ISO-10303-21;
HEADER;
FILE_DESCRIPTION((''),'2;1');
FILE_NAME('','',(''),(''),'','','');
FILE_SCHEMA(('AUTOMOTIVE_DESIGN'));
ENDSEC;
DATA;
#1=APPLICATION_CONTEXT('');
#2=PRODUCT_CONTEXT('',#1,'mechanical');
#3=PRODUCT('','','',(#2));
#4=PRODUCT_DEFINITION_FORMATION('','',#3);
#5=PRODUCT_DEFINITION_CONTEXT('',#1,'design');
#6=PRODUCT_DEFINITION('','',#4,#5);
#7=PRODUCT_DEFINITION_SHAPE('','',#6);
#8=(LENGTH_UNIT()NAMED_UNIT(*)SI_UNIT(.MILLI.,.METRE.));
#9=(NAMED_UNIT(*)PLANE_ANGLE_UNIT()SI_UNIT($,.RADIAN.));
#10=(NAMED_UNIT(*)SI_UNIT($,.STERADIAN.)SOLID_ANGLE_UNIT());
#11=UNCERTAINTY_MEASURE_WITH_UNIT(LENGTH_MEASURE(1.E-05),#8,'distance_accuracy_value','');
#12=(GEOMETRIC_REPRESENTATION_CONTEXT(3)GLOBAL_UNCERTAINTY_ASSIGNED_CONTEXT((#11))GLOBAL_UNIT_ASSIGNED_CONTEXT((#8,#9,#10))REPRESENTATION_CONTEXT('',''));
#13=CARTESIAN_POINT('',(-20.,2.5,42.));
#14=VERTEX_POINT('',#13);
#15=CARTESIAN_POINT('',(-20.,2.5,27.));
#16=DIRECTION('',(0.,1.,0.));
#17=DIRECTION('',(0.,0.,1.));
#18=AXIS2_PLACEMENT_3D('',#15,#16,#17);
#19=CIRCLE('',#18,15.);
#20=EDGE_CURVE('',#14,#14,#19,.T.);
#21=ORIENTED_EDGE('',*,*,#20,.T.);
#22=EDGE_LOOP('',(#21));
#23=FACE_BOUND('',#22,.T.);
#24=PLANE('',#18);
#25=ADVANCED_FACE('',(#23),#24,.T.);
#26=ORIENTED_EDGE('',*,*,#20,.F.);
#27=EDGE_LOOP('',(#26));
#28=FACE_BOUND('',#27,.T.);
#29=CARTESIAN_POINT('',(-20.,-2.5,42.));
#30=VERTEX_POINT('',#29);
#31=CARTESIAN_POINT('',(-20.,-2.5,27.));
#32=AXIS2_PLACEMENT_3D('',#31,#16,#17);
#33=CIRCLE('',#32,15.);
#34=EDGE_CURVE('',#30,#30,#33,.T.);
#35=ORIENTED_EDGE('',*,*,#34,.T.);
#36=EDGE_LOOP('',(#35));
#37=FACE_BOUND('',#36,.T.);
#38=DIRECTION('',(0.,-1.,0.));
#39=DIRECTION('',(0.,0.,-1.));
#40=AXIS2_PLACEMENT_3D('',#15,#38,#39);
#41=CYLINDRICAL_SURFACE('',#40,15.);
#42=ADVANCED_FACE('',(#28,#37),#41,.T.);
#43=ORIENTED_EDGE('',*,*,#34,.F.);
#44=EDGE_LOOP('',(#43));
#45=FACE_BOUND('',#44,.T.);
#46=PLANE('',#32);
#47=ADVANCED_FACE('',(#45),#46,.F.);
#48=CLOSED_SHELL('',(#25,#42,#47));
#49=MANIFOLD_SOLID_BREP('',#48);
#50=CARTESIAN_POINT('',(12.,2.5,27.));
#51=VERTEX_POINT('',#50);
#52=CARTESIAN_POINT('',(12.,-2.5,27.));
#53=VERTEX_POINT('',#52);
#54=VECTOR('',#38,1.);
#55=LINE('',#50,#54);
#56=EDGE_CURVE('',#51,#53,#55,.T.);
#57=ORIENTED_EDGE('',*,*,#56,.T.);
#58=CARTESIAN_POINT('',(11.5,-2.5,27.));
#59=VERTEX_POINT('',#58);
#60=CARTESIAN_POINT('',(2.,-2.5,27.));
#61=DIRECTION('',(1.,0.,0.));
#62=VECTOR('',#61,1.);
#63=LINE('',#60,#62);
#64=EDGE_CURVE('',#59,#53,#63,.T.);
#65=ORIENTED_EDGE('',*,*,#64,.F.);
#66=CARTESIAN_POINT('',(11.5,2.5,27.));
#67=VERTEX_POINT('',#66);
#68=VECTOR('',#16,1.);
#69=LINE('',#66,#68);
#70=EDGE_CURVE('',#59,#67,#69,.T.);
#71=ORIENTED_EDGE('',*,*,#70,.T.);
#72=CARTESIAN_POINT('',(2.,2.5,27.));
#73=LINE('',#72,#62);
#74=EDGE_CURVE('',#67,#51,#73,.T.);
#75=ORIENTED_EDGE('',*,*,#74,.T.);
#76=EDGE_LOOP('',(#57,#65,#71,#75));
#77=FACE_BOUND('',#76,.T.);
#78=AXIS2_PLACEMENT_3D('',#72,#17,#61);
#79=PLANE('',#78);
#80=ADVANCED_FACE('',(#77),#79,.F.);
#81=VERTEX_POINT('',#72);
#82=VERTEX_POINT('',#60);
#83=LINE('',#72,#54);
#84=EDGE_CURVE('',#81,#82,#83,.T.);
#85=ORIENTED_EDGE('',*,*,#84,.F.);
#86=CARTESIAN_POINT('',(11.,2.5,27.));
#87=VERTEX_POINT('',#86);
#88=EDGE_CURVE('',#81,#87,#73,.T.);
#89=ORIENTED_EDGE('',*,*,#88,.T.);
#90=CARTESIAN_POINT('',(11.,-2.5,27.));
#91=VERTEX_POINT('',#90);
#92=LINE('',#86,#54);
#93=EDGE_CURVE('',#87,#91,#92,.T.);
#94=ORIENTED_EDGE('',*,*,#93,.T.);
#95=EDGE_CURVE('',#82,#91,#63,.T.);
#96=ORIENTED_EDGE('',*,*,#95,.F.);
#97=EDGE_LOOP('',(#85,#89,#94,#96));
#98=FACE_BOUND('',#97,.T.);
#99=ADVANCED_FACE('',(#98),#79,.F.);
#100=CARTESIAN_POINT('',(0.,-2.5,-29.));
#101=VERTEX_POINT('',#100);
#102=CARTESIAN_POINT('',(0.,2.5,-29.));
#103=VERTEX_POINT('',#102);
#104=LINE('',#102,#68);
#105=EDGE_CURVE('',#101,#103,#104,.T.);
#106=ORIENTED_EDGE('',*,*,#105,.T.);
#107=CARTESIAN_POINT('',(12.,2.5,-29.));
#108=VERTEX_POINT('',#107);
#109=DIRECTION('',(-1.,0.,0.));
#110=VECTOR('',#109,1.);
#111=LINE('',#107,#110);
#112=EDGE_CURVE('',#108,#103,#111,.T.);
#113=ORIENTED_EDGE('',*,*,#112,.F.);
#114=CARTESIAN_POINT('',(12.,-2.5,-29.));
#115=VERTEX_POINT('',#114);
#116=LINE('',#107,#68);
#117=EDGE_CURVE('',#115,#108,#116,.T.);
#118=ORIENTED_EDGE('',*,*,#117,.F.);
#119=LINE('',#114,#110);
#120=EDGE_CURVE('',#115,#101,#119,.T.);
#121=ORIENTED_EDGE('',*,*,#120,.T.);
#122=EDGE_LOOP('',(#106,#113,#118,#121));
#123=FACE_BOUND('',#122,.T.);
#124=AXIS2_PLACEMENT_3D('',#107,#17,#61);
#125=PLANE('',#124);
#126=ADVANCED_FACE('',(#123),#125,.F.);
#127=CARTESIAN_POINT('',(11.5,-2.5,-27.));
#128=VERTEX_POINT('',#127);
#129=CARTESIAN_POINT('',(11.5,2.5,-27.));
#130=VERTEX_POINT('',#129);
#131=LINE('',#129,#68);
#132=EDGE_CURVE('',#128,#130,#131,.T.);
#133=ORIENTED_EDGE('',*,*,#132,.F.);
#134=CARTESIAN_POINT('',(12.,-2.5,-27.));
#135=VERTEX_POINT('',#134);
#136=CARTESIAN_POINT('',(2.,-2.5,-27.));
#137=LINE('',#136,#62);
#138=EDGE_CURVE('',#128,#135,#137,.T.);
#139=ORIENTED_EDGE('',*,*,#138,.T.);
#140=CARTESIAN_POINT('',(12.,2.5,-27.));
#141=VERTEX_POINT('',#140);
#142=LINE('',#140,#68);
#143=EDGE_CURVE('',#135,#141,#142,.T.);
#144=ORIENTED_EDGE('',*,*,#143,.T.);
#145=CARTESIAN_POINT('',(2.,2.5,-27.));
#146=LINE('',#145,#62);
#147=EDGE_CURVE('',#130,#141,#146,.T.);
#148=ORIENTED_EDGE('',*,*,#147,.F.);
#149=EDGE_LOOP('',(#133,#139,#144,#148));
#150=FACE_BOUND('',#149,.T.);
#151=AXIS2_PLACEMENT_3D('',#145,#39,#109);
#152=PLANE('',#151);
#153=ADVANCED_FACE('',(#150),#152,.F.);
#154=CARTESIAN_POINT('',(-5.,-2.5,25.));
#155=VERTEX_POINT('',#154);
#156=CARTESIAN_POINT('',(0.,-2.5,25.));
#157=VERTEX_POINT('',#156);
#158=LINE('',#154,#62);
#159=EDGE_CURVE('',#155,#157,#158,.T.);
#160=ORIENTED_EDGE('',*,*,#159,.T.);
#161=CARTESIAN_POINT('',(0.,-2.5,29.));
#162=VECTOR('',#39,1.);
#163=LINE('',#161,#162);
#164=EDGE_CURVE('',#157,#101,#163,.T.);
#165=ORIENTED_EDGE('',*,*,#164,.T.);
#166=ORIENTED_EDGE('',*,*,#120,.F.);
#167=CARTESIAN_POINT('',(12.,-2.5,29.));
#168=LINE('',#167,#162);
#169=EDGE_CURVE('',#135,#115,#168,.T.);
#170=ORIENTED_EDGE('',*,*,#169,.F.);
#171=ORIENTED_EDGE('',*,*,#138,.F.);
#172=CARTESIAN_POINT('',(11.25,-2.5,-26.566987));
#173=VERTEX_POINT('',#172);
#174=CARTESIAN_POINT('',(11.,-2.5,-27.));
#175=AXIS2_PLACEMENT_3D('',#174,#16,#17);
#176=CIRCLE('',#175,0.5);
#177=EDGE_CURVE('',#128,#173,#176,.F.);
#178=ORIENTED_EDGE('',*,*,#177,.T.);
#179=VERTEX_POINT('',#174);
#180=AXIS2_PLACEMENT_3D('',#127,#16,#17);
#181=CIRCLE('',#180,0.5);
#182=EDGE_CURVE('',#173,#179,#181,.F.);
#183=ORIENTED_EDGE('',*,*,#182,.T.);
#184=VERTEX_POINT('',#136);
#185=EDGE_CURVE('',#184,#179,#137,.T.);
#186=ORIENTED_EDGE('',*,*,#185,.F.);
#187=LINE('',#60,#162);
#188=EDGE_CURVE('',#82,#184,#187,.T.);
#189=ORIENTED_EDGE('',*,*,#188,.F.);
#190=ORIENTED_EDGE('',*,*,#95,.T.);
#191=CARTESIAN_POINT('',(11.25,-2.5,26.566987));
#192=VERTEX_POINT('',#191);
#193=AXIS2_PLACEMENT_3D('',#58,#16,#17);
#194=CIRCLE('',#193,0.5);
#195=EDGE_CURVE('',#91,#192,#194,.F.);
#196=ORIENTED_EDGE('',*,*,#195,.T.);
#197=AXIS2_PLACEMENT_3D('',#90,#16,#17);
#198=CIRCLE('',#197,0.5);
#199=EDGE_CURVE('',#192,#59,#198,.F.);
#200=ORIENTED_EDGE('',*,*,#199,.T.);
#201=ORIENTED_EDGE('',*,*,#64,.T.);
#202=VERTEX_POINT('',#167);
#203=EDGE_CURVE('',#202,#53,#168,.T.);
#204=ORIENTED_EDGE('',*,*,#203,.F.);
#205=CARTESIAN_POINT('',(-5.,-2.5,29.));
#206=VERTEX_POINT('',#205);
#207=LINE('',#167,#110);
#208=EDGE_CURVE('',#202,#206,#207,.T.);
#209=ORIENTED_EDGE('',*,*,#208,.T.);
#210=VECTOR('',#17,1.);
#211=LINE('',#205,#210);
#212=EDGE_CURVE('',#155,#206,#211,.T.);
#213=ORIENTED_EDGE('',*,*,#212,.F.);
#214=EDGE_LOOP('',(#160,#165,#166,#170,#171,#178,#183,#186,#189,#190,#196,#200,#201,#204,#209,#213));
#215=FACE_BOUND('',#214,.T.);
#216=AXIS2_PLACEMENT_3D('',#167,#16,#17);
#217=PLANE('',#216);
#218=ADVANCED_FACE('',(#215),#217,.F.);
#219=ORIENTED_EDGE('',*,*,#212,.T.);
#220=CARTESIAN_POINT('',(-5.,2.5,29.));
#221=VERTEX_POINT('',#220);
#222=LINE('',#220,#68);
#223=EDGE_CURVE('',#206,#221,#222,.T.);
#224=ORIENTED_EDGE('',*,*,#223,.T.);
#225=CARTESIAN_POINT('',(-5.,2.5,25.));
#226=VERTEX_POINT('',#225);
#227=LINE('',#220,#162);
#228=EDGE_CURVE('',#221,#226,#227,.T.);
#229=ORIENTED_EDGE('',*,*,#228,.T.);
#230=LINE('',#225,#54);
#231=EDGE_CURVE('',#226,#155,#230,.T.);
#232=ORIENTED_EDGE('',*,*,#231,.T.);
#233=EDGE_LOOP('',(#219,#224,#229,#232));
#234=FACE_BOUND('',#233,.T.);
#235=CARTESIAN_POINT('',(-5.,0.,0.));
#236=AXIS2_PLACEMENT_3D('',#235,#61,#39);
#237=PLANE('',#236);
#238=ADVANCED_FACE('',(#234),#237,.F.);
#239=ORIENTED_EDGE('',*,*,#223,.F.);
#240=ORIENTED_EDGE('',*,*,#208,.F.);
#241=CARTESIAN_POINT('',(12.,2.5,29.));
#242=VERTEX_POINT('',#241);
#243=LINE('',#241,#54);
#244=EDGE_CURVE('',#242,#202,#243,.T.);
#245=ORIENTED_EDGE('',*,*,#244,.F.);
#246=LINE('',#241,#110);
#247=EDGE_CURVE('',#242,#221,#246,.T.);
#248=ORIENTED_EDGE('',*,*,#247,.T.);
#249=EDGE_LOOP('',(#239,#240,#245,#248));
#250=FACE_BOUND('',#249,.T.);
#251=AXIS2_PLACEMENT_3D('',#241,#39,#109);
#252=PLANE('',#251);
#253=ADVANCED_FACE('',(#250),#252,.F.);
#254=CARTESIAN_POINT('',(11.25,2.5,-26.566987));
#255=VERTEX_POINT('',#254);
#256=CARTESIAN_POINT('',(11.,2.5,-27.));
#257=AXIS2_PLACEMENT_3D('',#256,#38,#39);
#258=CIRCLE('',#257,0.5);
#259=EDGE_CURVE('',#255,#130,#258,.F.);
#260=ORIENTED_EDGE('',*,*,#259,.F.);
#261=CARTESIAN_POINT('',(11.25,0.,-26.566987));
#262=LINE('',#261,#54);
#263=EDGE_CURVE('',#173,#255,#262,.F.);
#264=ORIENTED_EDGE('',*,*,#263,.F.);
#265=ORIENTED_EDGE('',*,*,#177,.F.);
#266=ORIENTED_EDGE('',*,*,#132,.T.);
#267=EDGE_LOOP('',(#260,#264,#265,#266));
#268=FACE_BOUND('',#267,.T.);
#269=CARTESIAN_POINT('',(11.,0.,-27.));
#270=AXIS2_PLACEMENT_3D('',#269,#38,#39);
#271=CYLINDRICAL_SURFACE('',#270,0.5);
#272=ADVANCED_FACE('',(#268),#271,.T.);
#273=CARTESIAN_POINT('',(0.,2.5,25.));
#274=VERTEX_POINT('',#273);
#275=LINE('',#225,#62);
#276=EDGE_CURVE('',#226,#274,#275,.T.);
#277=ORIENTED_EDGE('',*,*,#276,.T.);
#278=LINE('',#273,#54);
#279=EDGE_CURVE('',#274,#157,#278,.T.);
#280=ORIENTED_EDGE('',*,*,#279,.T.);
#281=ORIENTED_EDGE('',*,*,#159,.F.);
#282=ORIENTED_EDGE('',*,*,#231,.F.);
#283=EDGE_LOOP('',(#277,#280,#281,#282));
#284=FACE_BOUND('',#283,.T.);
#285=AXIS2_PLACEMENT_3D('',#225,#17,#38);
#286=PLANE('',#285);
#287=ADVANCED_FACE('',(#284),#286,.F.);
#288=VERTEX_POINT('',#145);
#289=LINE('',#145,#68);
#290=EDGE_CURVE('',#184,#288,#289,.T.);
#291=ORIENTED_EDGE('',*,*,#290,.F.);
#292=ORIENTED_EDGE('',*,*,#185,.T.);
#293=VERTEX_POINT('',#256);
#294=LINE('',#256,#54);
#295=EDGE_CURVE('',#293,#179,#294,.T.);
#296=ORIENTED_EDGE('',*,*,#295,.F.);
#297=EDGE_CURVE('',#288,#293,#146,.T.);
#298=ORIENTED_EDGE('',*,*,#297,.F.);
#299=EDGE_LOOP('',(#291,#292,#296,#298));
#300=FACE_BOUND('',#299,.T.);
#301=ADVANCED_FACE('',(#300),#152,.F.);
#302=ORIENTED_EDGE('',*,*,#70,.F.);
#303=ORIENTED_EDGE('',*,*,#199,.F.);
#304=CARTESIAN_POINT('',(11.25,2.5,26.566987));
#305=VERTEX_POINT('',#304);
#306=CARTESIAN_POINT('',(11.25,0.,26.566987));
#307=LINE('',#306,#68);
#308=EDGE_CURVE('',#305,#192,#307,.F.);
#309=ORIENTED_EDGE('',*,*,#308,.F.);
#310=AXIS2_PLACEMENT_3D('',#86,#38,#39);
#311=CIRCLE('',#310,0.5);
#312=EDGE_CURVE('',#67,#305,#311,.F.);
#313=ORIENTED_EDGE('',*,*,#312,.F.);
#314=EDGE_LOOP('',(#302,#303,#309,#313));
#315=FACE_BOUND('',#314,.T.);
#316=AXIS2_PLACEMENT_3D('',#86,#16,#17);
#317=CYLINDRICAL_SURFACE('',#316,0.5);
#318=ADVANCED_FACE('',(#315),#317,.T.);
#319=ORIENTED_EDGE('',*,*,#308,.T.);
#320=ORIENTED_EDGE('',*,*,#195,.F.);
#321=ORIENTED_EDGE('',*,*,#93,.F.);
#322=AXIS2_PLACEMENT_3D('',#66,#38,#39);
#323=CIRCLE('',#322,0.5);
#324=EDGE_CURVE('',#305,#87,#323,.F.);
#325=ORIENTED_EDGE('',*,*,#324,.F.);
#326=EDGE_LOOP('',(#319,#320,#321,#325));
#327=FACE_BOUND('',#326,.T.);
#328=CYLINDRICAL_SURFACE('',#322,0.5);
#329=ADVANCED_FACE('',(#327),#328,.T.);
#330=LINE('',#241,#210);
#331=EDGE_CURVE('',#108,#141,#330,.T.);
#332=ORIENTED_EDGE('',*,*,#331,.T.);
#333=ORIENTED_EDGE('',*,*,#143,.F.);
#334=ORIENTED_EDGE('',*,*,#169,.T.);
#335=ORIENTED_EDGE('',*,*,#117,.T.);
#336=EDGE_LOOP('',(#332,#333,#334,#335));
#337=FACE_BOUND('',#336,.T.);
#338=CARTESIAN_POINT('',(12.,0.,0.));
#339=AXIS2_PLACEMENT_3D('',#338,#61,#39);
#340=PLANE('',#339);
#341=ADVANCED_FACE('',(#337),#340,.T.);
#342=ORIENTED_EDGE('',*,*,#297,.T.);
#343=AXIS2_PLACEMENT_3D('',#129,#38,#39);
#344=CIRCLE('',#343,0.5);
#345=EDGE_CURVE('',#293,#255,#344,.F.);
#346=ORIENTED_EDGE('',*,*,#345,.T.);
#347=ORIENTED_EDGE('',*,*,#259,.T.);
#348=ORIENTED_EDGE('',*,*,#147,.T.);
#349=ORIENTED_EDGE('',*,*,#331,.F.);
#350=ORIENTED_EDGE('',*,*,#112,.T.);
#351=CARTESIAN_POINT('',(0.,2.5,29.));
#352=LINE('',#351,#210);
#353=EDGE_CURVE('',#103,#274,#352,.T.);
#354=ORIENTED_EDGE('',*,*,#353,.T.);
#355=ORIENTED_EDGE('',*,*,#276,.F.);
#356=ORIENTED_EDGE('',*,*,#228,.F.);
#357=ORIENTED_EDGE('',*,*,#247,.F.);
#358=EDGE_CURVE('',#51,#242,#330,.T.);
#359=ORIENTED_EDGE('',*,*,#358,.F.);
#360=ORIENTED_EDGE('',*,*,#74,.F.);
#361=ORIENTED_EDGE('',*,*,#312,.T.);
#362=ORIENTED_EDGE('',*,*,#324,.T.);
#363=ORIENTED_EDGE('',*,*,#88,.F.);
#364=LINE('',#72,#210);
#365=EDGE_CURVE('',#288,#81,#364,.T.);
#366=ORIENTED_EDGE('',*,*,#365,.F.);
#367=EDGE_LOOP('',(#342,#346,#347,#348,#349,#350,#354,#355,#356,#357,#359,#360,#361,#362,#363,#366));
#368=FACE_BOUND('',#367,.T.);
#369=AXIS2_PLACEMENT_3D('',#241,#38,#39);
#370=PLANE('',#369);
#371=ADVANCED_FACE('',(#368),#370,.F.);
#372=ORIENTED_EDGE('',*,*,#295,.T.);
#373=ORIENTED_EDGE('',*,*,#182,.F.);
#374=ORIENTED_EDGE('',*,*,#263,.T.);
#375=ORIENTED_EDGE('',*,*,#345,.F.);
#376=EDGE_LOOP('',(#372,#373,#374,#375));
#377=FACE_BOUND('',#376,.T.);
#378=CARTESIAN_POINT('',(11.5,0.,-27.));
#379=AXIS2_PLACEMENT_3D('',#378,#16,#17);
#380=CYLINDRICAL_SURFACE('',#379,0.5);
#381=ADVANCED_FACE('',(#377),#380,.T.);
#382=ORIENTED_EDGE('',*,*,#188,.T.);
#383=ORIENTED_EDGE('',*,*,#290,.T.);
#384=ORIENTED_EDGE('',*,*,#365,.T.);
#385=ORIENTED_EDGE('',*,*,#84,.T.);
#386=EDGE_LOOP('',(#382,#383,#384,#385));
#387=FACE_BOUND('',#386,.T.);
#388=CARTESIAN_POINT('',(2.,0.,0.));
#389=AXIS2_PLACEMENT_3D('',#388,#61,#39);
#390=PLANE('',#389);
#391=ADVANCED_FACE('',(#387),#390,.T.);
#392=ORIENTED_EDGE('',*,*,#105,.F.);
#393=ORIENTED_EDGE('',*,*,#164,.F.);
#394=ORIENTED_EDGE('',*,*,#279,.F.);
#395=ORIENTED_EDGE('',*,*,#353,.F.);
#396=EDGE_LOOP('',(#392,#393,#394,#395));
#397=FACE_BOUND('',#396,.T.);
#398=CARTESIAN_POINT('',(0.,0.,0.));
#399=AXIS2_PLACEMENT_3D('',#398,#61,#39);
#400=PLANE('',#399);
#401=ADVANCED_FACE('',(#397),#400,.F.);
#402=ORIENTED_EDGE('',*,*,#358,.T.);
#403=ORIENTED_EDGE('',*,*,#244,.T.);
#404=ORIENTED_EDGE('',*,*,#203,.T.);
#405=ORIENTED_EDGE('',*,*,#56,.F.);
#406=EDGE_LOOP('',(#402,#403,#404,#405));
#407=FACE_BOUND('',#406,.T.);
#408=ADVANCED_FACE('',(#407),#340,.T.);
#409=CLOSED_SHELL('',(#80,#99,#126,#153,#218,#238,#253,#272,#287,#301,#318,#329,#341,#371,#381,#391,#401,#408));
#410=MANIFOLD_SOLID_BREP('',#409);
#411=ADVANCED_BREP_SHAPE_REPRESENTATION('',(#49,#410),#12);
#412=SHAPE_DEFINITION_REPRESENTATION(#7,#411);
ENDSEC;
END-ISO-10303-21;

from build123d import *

# Parameters (mm, degrees)
SKETCH6_W                = 58
SKETCH6_H                = 5
BOSS_EXTRUDE2_DEPTH      = 12
SKETCH7_W                = 54
SKETCH7_H                = 5
CUT_EXTRUDE3_DEPTH       = 10
SKETCH8_W                = 0.5
SKETCH8_H                = 5
BOSS_EXTRUDE3_DEPTH      = 0.5
FILLET1_R                = 0.5
FILLET1_OF_MIRROR3_R     = 0.5
SKETCH9_W                = 4
SKETCH9_H                = 5
BOSS_EXTRUDE4_DEPTH      = 5
BOSS_EXTRUDE5_DEPTH      = 2.5
BOSS_EXTRUDE5_DEPTH_BACK = 2.5
SKETCH11_R               = 15


with BuildPart() as part:
    # Sketch6 → Boss-Extrude2 (new body)
    with BuildSketch(Plane(origin=(0, 0, 0), x_dir=(0, 0, -1), z_dir=(1, 0, 0))):
        Rectangle(SKETCH6_W, SKETCH6_H)
    extrude(amount=BOSS_EXTRUDE2_DEPTH)

    # Sketch7 → Cut-Extrude3 (cut)
    with BuildSketch(Plane(origin=(12, 0, 0), x_dir=(0, 0, -1), z_dir=(1, 0, 0))):
        Rectangle(SKETCH7_W, SKETCH7_H)
    extrude(amount=-CUT_EXTRUDE3_DEPTH, mode=Mode.SUBTRACT)

    # Sketch8 → Boss-Extrude3 (add)
    with BuildSketch(Plane.XY.offset(-27)):
        with Locations((11.25, 0)):
            Rectangle(SKETCH8_W, SKETCH8_H)
    boss_extrude3 = extrude(amount=BOSS_EXTRUDE3_DEPTH)

    # Fillet1
    # the kernel refuses this fillet: 0.5 mm, written as the material it takes off along each edge
    with BuildSketch(Plane(origin=(11, -3.75, -26.5), x_dir=(0, 0, -1), z_dir=(0, 1, 0)), Plane(origin=(11.5, 3.75, -26.5), x_dir=(0, 0, -1), z_dir=(0, -1, 0))) as fillet1_piece_1:
        with BuildLine():
            CenterArc((FILLET1_R, -FILLET1_R), FILLET1_R, 90, 90)
            Line((0, -FILLET1_R), (0, 0))
            Line((0, 0), (FILLET1_R, 0))
        make_face()
    extrude(amount=7.5, mode=Mode.SUBTRACT)

    # Mirror3: Boss-Extrude3 across plane
    add(boss_extrude3.mirror(Plane(origin=(0, 0, 0), x_dir=(1, 0, 0), z_dir=(0, 0, -1))))

    # Fillet1 of Mirror3
    # the kernel refuses this fillet: 0.5 mm, written as the material it takes off along each edge
    with BuildSketch(Plane(origin=(11, -3.75, 26.5), x_dir=(0, 0, 1), z_dir=(0, 1, 0)), Plane(origin=(11.5, 3.75, 26.5), x_dir=(0, 0, 1), z_dir=(0, -1, 0))) as fillet1_of_mirror3_piece_1:
        with BuildLine():
            CenterArc((FILLET1_OF_MIRROR3_R, FILLET1_OF_MIRROR3_R), FILLET1_OF_MIRROR3_R, 180, 90)
            Line((0, FILLET1_OF_MIRROR3_R), (0, 0))
            Line((0, 0), (FILLET1_OF_MIRROR3_R, 0))
        make_face()
    extrude(amount=7.5, mode=Mode.SUBTRACT)

    # Sketch9 → Boss-Extrude4 (add)
    with BuildSketch(Plane.ZY):
        with Locations((27, 0)):
            Rectangle(SKETCH9_W, SKETCH9_H)
    extrude(amount=BOSS_EXTRUDE4_DEPTH)


with BuildPart() as body_2:
    # Sketch11 → Boss-Extrude5 (new, two sides: drawn at the far end of the back side and taken through both)
    with BuildSketch(Plane(origin=(0, 0, 0), x_dir=(1, 0, 0), z_dir=(0, 1, 0)).offset(-BOSS_EXTRUDE5_DEPTH_BACK)):
        with Locations(Location((-20, -27, 0), (0, 0, 270))):
            Circle(SKETCH11_R)
    extrude(amount=BOSS_EXTRUDE5_DEPTH + BOSS_EXTRUDE5_DEPTH_BACK)


solid = Compound([part.part, body_2.part])
